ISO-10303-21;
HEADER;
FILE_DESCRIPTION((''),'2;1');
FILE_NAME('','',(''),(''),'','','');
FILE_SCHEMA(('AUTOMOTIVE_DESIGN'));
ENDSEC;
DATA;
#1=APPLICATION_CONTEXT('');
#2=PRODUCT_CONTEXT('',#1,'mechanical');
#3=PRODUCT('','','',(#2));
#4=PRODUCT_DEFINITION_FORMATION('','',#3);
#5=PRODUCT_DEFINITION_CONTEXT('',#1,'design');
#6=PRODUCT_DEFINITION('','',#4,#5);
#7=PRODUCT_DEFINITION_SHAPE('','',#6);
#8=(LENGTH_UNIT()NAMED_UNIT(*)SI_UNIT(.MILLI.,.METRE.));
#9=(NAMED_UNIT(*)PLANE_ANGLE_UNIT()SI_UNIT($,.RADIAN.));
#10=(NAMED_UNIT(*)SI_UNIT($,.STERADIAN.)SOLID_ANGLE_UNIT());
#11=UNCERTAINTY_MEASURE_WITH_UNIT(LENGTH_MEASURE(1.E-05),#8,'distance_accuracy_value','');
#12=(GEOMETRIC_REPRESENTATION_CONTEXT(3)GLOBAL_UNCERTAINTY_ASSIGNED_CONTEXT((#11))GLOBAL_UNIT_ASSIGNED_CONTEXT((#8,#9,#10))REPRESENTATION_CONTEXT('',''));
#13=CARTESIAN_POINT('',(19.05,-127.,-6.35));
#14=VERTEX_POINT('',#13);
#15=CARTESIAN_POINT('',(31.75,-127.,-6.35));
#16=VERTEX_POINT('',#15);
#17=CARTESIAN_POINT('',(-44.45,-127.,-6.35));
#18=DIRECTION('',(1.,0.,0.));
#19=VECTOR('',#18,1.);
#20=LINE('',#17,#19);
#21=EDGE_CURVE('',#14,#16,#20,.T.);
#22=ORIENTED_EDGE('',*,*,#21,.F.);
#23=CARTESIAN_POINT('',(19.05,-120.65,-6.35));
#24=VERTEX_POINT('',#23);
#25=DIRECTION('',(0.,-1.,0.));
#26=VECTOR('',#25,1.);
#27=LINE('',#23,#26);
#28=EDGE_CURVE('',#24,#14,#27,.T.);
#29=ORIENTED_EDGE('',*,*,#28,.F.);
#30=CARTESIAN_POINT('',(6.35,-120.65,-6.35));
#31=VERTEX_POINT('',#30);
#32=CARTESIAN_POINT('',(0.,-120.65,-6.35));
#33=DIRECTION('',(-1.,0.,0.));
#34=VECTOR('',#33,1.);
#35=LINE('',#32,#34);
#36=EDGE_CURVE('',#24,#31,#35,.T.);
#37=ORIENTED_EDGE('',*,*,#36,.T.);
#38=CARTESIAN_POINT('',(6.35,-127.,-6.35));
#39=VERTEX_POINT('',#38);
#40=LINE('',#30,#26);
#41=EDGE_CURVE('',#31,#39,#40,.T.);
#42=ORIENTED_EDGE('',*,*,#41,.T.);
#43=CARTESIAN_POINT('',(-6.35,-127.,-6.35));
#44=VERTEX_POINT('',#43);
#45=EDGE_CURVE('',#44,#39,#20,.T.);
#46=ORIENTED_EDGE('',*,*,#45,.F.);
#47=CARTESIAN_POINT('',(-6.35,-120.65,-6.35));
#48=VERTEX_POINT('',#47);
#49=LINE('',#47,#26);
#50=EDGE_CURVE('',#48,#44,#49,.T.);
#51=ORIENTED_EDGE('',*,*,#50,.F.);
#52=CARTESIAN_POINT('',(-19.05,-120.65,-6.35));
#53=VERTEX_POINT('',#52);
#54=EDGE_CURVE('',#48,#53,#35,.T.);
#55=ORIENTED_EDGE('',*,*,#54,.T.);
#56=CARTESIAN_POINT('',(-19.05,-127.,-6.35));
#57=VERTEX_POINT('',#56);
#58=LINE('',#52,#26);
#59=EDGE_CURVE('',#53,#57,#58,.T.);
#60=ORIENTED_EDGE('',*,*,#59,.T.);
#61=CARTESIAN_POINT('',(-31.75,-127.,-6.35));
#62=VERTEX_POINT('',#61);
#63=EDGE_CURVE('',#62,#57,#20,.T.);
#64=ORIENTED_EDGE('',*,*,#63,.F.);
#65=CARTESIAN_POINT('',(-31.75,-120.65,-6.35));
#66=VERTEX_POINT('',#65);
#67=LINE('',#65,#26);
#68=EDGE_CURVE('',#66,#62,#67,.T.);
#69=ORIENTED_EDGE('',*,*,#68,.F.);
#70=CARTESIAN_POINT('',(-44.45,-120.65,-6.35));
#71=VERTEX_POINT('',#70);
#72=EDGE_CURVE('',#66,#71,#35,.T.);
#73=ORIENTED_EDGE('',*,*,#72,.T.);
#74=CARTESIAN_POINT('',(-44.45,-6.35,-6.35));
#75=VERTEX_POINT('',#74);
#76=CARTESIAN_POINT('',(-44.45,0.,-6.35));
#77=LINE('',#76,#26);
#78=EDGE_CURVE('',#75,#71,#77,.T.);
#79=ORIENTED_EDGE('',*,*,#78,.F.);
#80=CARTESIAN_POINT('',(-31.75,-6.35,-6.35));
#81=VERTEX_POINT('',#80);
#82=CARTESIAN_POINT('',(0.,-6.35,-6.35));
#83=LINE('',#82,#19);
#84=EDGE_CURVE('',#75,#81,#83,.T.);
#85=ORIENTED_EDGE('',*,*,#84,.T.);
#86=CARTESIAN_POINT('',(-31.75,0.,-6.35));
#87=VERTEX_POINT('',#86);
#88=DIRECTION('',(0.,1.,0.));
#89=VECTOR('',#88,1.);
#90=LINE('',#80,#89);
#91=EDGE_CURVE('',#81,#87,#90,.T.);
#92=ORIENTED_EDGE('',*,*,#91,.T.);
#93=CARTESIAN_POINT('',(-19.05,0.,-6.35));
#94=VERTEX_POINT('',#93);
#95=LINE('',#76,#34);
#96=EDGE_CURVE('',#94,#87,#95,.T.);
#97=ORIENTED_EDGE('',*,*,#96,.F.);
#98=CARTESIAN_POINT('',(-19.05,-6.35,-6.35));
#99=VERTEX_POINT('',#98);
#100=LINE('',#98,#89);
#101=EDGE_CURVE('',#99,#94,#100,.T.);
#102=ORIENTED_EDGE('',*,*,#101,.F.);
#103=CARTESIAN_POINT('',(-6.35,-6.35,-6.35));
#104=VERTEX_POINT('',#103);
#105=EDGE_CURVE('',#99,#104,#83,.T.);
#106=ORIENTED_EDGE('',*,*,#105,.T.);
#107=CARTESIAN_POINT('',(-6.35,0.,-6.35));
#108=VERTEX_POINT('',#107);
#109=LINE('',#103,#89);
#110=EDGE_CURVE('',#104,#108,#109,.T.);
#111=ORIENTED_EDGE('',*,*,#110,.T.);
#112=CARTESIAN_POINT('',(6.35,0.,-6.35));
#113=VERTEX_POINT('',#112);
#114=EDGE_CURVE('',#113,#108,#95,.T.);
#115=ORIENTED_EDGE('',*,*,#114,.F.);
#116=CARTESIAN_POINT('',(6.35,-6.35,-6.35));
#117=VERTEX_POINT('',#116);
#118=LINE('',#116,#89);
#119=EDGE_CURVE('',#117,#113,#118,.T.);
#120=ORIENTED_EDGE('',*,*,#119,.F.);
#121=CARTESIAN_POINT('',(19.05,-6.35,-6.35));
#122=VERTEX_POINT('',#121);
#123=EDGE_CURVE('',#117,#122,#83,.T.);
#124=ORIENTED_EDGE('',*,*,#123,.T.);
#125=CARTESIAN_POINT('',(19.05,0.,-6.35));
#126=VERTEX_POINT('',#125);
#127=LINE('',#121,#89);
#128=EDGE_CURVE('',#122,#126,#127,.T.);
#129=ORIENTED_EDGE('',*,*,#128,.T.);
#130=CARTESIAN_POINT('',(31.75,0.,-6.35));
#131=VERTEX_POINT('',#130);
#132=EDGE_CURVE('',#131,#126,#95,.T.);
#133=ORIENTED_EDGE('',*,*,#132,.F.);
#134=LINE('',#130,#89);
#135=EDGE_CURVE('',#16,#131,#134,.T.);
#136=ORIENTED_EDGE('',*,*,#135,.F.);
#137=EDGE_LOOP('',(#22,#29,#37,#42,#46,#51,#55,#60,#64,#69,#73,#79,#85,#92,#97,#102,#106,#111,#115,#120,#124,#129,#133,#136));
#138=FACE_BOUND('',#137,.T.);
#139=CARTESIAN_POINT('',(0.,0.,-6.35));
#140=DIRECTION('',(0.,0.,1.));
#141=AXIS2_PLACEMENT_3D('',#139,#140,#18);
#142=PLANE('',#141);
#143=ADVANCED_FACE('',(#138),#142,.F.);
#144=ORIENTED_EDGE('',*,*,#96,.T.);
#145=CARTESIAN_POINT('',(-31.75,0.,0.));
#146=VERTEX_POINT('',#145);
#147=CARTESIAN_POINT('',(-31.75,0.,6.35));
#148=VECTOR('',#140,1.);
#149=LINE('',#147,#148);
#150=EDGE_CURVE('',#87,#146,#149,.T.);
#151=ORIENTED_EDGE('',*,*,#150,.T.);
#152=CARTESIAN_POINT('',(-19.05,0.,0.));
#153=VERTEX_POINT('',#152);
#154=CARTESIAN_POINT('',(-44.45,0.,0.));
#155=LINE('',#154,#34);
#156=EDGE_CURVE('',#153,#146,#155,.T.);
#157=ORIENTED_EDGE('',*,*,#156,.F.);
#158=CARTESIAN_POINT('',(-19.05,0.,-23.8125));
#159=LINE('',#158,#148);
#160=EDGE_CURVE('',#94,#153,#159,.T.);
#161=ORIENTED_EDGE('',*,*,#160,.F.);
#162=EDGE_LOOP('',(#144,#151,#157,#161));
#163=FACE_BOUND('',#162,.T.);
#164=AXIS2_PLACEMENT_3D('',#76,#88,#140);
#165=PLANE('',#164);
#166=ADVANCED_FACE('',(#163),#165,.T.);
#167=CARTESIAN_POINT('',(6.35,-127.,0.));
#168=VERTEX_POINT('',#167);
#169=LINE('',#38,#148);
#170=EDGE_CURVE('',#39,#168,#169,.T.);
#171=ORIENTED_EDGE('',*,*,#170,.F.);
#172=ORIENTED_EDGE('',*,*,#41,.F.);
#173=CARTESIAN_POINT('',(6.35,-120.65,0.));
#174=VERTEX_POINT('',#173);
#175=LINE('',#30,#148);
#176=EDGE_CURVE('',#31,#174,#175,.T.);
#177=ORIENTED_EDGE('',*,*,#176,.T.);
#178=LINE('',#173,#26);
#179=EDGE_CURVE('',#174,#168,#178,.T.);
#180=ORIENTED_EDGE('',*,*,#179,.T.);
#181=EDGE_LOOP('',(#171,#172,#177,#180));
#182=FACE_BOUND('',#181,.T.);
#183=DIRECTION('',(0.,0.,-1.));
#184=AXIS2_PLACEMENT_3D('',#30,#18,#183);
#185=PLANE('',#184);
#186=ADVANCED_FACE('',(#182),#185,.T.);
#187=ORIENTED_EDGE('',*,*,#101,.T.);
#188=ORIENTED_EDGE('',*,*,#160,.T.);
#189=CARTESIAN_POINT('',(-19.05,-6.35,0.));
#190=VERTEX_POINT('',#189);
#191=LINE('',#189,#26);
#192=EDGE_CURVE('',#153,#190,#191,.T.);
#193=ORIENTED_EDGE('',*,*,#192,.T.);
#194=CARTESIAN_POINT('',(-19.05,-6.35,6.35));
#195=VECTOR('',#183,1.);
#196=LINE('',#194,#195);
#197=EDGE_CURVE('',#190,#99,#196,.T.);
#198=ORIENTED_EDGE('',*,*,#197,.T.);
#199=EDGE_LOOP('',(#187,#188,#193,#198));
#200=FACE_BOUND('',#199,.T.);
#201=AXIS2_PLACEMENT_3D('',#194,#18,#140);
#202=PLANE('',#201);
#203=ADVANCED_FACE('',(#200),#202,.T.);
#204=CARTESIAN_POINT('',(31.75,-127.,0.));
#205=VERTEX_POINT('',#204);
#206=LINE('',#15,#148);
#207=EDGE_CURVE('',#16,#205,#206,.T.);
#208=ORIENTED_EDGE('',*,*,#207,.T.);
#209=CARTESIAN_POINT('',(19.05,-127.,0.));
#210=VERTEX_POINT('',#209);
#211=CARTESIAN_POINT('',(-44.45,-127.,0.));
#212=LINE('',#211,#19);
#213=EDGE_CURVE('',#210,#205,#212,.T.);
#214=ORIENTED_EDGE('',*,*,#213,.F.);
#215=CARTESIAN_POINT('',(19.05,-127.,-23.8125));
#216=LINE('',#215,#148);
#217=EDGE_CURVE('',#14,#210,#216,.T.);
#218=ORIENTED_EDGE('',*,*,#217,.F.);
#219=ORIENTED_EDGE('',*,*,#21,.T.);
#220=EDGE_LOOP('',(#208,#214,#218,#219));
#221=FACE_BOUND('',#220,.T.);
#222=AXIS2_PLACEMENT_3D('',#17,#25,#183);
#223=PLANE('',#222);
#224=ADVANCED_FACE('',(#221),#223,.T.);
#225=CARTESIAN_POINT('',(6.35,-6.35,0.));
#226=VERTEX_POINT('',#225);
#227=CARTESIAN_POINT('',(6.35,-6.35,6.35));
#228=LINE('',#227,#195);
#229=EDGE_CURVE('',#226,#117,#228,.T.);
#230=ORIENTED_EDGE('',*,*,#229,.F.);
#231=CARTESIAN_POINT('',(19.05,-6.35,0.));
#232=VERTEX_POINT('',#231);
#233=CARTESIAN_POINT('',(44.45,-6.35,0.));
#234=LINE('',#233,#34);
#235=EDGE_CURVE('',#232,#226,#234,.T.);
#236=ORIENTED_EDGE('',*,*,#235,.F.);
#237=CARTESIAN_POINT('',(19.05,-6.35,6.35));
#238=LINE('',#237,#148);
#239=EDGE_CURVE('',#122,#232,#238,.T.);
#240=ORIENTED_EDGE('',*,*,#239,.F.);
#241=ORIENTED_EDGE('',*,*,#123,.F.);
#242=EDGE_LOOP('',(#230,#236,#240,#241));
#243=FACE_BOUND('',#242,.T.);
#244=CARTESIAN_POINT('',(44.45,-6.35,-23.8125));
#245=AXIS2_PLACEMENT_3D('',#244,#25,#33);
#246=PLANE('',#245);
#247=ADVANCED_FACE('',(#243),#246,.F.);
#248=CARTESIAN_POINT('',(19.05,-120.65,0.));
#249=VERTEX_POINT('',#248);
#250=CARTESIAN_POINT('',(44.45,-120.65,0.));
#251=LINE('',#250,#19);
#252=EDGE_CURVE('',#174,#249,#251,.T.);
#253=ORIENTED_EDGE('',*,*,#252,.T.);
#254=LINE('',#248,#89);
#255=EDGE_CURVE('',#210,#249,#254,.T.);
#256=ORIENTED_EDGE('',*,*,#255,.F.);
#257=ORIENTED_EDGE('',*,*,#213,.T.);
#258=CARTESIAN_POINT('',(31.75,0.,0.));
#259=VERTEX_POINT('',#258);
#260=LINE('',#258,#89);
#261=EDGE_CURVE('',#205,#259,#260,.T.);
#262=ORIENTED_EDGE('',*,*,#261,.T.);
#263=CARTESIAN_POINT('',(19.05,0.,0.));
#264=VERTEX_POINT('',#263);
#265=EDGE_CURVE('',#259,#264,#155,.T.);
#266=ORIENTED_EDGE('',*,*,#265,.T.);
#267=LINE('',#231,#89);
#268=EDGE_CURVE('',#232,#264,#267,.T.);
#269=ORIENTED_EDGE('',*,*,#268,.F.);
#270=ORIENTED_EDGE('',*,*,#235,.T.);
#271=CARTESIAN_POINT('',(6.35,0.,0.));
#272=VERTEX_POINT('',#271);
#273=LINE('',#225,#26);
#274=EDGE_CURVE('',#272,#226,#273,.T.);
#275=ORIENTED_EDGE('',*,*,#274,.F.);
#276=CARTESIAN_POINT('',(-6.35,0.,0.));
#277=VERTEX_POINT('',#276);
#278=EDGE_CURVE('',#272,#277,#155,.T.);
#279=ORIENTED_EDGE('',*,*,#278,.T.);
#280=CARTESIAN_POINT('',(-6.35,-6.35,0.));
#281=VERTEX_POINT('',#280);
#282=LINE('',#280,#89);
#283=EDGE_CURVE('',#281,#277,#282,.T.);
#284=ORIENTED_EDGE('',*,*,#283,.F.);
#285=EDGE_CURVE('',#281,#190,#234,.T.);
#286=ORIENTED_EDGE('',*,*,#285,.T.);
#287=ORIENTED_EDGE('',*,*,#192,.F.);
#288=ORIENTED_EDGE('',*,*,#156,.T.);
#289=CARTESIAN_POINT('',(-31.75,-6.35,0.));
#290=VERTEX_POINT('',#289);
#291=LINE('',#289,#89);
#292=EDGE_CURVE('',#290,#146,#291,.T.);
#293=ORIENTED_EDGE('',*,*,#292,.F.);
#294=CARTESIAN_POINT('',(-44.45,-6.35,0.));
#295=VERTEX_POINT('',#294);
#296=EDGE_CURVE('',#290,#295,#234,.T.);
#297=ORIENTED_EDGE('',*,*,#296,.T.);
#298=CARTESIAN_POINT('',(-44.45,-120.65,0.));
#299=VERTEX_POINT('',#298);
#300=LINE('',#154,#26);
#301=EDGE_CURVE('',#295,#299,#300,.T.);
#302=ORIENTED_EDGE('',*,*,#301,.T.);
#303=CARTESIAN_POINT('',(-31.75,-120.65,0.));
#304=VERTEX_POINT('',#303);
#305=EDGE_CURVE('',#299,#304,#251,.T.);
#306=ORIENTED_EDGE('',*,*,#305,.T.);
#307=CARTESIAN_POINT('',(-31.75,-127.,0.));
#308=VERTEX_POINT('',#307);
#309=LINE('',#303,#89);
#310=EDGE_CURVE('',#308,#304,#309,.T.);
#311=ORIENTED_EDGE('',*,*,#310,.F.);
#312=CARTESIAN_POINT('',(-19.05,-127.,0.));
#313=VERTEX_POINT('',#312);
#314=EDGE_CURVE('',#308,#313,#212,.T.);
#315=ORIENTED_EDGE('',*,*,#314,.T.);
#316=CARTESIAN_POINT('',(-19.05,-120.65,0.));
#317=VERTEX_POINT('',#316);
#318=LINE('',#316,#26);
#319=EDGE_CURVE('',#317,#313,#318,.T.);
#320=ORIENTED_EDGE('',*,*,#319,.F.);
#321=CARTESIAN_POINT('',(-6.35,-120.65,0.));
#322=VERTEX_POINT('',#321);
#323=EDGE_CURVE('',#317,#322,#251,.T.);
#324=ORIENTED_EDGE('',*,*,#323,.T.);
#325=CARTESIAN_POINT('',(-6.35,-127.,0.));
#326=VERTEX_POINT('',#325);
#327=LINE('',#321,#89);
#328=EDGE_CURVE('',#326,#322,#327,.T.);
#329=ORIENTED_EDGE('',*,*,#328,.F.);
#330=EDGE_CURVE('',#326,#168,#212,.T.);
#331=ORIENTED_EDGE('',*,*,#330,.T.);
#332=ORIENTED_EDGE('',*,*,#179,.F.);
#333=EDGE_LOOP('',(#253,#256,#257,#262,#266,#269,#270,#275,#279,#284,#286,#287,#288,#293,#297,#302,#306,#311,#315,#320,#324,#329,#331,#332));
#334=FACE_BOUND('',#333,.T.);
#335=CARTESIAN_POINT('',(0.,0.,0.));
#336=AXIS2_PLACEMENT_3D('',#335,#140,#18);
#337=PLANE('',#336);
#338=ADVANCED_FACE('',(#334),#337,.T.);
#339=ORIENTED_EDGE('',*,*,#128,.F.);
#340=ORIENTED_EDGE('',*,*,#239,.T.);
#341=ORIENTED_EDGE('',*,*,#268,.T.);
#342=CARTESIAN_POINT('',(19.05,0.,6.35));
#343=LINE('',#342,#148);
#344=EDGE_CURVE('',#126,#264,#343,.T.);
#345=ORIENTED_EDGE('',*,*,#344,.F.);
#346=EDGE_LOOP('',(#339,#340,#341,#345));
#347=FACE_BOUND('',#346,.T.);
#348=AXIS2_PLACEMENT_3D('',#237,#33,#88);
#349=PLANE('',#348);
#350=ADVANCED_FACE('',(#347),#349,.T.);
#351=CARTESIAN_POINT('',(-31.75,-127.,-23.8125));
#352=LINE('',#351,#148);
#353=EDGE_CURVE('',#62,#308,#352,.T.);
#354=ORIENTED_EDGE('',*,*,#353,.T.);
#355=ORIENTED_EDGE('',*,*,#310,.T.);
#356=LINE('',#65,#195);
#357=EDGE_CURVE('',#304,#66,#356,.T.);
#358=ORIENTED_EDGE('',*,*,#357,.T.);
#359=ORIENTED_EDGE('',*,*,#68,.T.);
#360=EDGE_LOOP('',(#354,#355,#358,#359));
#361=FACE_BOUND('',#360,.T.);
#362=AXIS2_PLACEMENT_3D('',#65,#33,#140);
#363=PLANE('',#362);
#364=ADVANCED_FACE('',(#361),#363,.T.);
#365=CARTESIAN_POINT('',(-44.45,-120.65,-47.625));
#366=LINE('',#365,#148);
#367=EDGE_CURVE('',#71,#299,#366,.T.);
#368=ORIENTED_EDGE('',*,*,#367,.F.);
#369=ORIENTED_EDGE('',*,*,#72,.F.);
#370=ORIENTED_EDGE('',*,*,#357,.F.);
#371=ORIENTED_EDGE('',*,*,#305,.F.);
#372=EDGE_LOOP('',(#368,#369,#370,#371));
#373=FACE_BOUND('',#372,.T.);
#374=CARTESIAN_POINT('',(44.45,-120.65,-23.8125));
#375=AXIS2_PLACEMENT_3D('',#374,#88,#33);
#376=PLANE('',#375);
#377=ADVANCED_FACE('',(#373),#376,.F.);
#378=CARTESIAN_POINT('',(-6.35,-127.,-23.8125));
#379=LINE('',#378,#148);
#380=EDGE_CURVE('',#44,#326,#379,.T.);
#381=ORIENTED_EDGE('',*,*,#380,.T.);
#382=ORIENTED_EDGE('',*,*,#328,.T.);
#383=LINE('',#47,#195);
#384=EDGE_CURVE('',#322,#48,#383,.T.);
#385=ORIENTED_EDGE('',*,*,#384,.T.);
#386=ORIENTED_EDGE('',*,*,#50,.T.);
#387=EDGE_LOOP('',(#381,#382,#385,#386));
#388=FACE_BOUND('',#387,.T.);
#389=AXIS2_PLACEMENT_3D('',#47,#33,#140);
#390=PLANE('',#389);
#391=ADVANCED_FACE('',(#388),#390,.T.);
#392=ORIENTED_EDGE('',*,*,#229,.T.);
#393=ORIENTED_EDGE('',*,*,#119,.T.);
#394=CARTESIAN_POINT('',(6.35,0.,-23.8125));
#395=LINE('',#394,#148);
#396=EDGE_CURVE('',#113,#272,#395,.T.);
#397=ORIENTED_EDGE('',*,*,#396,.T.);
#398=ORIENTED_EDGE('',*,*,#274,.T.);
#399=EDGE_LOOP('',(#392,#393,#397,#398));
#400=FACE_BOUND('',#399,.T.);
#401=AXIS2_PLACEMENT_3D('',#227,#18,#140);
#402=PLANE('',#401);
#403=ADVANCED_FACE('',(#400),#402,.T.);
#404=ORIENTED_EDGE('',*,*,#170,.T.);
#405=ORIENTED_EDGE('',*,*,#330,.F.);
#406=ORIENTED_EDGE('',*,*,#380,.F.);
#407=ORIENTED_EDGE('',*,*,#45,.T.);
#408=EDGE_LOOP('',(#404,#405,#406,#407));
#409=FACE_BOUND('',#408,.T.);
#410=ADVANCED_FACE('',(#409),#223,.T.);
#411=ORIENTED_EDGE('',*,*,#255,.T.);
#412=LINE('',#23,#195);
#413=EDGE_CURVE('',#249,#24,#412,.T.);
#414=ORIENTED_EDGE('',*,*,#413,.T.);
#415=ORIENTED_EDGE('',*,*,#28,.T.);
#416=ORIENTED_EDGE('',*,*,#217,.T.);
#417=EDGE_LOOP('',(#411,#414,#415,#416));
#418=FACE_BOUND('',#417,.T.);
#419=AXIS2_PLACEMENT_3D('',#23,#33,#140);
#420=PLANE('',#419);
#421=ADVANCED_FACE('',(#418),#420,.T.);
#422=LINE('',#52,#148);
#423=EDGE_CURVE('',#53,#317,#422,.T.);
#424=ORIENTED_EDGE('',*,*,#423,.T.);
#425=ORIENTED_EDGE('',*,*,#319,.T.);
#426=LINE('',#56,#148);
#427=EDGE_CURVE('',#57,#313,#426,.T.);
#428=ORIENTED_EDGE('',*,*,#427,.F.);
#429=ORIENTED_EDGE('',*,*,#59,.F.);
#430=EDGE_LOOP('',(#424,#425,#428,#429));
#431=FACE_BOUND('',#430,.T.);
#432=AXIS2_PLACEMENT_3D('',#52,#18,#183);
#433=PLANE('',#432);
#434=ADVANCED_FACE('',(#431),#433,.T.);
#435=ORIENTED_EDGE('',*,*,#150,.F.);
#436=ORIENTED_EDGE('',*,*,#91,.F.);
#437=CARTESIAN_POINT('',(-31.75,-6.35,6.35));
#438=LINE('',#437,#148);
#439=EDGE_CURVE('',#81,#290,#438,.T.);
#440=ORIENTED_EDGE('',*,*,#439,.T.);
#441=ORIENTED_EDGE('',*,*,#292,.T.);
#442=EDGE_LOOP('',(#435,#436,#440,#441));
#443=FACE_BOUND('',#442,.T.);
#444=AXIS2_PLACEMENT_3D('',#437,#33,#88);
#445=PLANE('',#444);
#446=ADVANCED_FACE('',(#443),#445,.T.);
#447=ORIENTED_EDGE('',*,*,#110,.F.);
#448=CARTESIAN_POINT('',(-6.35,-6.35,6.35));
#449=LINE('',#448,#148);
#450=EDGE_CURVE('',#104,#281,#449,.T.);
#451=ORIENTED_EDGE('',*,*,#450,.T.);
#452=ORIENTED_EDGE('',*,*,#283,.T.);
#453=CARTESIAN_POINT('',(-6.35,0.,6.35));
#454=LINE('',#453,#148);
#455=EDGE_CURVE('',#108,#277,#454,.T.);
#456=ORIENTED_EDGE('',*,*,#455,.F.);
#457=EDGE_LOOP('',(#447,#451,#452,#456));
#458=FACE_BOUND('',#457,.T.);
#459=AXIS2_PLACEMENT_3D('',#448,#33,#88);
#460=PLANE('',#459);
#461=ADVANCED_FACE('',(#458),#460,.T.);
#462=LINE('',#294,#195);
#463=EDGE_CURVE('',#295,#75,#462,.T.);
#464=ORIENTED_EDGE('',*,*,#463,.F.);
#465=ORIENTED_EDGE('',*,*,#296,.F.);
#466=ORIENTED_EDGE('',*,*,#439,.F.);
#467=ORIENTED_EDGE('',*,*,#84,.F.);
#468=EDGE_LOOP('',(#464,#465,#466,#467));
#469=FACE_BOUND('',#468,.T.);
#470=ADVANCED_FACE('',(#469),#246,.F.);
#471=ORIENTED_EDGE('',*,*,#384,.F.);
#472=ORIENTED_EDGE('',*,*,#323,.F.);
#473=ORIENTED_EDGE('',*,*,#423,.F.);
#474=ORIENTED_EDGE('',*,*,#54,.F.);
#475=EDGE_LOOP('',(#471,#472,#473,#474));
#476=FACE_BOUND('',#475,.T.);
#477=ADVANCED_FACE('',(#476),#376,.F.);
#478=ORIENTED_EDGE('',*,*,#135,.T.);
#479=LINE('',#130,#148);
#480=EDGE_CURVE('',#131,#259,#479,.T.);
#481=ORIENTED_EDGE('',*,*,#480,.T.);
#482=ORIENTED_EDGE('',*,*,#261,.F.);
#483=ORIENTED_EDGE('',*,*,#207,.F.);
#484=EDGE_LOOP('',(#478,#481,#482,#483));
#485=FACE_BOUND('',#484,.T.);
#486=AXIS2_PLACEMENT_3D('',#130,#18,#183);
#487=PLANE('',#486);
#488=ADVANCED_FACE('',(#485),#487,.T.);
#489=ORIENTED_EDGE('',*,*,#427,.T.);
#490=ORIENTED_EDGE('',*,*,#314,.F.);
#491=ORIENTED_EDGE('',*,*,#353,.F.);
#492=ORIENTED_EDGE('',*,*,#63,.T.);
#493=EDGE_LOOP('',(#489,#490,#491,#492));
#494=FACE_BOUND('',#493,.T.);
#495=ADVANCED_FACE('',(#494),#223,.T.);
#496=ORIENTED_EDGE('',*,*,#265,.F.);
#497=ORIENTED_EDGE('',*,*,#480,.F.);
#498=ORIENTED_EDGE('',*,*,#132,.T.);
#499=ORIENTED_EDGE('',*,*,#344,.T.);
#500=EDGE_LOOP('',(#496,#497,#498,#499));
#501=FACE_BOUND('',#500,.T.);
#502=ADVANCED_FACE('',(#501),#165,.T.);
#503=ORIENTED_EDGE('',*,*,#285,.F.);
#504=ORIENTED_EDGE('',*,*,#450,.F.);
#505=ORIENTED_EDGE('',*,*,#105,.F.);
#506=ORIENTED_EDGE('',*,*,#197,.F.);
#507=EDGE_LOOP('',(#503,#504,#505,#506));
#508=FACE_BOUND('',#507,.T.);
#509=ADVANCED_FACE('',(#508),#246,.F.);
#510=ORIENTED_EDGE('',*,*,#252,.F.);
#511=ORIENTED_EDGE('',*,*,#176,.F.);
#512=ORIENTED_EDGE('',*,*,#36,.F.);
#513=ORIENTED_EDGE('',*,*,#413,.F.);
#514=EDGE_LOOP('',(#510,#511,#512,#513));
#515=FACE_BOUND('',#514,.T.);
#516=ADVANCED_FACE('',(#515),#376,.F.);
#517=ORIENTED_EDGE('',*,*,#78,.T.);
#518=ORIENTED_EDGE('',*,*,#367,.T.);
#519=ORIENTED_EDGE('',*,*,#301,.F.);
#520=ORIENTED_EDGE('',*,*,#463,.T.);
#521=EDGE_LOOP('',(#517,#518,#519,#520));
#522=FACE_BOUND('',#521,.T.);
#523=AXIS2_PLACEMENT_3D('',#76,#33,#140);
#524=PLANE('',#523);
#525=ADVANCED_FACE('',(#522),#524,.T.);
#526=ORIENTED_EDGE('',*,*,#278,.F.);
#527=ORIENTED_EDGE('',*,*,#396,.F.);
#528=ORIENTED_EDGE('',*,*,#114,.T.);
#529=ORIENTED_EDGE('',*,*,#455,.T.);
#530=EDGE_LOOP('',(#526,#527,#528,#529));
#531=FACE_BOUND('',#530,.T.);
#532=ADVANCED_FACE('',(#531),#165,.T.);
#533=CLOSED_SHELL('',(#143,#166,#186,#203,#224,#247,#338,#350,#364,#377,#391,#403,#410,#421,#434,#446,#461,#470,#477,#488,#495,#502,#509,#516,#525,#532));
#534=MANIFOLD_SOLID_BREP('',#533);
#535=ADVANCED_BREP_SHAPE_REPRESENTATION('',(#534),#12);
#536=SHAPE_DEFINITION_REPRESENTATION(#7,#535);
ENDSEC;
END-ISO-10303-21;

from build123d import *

# Parameters (mm, degrees)
SKETCH1_W           = 76.2
SKETCH1_H           = 127
BOSS_EXTRUDE1_DEPTH = 6.35
CAVITY1_START       = -44.45
CAVITY1_OUTLINE_W   = 6.35
CAVITY1_OUTLINE_H   = 6.35
CAVITY1_DEPTH       = 12.7
CAVITY1_START_2     = -19.05
CAVITY1_2_OUTLINE_W = 6.35
CAVITY1_2_OUTLINE_H = 6.35
CAVITY1_2_DEPTH     = 12.7
CAVITY1_START_3     = 6.35
CAVITY1_3_OUTLINE_W = 6.35
CAVITY1_3_OUTLINE_H = 6.35
CAVITY1_3_DEPTH     = 12.7


# Read off the part's stored shape, not the designer's step: Cavity1
with BuildPart() as part:
    # Sketch1 → Boss-Extrude1 (new body)
    with BuildSketch(Plane.XY):
        with Locations((-6.35, -63.5)):
            Rectangle(SKETCH1_W, SKETCH1_H)
    extrude(amount=-BOSS_EXTRUDE1_DEPTH)

    # Cavity1 outline → Cavity1 (cut)
    with BuildSketch(Plane.YZ.offset(CAVITY1_START)):
        with Locations((-123.825, -3.175)):
            Rectangle(CAVITY1_OUTLINE_W, CAVITY1_OUTLINE_H)
        with Locations((-3.175, -3.175)):
            Rectangle(CAVITY1_OUTLINE_W, CAVITY1_OUTLINE_H)
    extrude(amount=CAVITY1_DEPTH, mode=Mode.SUBTRACT)

    # Cavity1 2 outline → Cavity1 2 (cut)
    with BuildSketch(Plane.YZ.offset(CAVITY1_START_2)):
        with Locations((-123.825, -3.175)):
            Rectangle(CAVITY1_2_OUTLINE_W, CAVITY1_2_OUTLINE_H)
        with Locations((-3.175, -3.175)):
            Rectangle(CAVITY1_2_OUTLINE_W, CAVITY1_2_OUTLINE_H)
    extrude(amount=CAVITY1_2_DEPTH, mode=Mode.SUBTRACT)

    # Cavity1 3 outline → Cavity1 3 (cut)
    with BuildSketch(Plane.YZ.offset(CAVITY1_START_3)):
        with Locations((-123.825, -3.175)):
            Rectangle(CAVITY1_3_OUTLINE_W, CAVITY1_3_OUTLINE_H)
        with Locations((-3.175, -3.175)):
            Rectangle(CAVITY1_3_OUTLINE_W, CAVITY1_3_OUTLINE_H)
    extrude(amount=CAVITY1_3_DEPTH, mode=Mode.SUBTRACT)


solid = part.part
